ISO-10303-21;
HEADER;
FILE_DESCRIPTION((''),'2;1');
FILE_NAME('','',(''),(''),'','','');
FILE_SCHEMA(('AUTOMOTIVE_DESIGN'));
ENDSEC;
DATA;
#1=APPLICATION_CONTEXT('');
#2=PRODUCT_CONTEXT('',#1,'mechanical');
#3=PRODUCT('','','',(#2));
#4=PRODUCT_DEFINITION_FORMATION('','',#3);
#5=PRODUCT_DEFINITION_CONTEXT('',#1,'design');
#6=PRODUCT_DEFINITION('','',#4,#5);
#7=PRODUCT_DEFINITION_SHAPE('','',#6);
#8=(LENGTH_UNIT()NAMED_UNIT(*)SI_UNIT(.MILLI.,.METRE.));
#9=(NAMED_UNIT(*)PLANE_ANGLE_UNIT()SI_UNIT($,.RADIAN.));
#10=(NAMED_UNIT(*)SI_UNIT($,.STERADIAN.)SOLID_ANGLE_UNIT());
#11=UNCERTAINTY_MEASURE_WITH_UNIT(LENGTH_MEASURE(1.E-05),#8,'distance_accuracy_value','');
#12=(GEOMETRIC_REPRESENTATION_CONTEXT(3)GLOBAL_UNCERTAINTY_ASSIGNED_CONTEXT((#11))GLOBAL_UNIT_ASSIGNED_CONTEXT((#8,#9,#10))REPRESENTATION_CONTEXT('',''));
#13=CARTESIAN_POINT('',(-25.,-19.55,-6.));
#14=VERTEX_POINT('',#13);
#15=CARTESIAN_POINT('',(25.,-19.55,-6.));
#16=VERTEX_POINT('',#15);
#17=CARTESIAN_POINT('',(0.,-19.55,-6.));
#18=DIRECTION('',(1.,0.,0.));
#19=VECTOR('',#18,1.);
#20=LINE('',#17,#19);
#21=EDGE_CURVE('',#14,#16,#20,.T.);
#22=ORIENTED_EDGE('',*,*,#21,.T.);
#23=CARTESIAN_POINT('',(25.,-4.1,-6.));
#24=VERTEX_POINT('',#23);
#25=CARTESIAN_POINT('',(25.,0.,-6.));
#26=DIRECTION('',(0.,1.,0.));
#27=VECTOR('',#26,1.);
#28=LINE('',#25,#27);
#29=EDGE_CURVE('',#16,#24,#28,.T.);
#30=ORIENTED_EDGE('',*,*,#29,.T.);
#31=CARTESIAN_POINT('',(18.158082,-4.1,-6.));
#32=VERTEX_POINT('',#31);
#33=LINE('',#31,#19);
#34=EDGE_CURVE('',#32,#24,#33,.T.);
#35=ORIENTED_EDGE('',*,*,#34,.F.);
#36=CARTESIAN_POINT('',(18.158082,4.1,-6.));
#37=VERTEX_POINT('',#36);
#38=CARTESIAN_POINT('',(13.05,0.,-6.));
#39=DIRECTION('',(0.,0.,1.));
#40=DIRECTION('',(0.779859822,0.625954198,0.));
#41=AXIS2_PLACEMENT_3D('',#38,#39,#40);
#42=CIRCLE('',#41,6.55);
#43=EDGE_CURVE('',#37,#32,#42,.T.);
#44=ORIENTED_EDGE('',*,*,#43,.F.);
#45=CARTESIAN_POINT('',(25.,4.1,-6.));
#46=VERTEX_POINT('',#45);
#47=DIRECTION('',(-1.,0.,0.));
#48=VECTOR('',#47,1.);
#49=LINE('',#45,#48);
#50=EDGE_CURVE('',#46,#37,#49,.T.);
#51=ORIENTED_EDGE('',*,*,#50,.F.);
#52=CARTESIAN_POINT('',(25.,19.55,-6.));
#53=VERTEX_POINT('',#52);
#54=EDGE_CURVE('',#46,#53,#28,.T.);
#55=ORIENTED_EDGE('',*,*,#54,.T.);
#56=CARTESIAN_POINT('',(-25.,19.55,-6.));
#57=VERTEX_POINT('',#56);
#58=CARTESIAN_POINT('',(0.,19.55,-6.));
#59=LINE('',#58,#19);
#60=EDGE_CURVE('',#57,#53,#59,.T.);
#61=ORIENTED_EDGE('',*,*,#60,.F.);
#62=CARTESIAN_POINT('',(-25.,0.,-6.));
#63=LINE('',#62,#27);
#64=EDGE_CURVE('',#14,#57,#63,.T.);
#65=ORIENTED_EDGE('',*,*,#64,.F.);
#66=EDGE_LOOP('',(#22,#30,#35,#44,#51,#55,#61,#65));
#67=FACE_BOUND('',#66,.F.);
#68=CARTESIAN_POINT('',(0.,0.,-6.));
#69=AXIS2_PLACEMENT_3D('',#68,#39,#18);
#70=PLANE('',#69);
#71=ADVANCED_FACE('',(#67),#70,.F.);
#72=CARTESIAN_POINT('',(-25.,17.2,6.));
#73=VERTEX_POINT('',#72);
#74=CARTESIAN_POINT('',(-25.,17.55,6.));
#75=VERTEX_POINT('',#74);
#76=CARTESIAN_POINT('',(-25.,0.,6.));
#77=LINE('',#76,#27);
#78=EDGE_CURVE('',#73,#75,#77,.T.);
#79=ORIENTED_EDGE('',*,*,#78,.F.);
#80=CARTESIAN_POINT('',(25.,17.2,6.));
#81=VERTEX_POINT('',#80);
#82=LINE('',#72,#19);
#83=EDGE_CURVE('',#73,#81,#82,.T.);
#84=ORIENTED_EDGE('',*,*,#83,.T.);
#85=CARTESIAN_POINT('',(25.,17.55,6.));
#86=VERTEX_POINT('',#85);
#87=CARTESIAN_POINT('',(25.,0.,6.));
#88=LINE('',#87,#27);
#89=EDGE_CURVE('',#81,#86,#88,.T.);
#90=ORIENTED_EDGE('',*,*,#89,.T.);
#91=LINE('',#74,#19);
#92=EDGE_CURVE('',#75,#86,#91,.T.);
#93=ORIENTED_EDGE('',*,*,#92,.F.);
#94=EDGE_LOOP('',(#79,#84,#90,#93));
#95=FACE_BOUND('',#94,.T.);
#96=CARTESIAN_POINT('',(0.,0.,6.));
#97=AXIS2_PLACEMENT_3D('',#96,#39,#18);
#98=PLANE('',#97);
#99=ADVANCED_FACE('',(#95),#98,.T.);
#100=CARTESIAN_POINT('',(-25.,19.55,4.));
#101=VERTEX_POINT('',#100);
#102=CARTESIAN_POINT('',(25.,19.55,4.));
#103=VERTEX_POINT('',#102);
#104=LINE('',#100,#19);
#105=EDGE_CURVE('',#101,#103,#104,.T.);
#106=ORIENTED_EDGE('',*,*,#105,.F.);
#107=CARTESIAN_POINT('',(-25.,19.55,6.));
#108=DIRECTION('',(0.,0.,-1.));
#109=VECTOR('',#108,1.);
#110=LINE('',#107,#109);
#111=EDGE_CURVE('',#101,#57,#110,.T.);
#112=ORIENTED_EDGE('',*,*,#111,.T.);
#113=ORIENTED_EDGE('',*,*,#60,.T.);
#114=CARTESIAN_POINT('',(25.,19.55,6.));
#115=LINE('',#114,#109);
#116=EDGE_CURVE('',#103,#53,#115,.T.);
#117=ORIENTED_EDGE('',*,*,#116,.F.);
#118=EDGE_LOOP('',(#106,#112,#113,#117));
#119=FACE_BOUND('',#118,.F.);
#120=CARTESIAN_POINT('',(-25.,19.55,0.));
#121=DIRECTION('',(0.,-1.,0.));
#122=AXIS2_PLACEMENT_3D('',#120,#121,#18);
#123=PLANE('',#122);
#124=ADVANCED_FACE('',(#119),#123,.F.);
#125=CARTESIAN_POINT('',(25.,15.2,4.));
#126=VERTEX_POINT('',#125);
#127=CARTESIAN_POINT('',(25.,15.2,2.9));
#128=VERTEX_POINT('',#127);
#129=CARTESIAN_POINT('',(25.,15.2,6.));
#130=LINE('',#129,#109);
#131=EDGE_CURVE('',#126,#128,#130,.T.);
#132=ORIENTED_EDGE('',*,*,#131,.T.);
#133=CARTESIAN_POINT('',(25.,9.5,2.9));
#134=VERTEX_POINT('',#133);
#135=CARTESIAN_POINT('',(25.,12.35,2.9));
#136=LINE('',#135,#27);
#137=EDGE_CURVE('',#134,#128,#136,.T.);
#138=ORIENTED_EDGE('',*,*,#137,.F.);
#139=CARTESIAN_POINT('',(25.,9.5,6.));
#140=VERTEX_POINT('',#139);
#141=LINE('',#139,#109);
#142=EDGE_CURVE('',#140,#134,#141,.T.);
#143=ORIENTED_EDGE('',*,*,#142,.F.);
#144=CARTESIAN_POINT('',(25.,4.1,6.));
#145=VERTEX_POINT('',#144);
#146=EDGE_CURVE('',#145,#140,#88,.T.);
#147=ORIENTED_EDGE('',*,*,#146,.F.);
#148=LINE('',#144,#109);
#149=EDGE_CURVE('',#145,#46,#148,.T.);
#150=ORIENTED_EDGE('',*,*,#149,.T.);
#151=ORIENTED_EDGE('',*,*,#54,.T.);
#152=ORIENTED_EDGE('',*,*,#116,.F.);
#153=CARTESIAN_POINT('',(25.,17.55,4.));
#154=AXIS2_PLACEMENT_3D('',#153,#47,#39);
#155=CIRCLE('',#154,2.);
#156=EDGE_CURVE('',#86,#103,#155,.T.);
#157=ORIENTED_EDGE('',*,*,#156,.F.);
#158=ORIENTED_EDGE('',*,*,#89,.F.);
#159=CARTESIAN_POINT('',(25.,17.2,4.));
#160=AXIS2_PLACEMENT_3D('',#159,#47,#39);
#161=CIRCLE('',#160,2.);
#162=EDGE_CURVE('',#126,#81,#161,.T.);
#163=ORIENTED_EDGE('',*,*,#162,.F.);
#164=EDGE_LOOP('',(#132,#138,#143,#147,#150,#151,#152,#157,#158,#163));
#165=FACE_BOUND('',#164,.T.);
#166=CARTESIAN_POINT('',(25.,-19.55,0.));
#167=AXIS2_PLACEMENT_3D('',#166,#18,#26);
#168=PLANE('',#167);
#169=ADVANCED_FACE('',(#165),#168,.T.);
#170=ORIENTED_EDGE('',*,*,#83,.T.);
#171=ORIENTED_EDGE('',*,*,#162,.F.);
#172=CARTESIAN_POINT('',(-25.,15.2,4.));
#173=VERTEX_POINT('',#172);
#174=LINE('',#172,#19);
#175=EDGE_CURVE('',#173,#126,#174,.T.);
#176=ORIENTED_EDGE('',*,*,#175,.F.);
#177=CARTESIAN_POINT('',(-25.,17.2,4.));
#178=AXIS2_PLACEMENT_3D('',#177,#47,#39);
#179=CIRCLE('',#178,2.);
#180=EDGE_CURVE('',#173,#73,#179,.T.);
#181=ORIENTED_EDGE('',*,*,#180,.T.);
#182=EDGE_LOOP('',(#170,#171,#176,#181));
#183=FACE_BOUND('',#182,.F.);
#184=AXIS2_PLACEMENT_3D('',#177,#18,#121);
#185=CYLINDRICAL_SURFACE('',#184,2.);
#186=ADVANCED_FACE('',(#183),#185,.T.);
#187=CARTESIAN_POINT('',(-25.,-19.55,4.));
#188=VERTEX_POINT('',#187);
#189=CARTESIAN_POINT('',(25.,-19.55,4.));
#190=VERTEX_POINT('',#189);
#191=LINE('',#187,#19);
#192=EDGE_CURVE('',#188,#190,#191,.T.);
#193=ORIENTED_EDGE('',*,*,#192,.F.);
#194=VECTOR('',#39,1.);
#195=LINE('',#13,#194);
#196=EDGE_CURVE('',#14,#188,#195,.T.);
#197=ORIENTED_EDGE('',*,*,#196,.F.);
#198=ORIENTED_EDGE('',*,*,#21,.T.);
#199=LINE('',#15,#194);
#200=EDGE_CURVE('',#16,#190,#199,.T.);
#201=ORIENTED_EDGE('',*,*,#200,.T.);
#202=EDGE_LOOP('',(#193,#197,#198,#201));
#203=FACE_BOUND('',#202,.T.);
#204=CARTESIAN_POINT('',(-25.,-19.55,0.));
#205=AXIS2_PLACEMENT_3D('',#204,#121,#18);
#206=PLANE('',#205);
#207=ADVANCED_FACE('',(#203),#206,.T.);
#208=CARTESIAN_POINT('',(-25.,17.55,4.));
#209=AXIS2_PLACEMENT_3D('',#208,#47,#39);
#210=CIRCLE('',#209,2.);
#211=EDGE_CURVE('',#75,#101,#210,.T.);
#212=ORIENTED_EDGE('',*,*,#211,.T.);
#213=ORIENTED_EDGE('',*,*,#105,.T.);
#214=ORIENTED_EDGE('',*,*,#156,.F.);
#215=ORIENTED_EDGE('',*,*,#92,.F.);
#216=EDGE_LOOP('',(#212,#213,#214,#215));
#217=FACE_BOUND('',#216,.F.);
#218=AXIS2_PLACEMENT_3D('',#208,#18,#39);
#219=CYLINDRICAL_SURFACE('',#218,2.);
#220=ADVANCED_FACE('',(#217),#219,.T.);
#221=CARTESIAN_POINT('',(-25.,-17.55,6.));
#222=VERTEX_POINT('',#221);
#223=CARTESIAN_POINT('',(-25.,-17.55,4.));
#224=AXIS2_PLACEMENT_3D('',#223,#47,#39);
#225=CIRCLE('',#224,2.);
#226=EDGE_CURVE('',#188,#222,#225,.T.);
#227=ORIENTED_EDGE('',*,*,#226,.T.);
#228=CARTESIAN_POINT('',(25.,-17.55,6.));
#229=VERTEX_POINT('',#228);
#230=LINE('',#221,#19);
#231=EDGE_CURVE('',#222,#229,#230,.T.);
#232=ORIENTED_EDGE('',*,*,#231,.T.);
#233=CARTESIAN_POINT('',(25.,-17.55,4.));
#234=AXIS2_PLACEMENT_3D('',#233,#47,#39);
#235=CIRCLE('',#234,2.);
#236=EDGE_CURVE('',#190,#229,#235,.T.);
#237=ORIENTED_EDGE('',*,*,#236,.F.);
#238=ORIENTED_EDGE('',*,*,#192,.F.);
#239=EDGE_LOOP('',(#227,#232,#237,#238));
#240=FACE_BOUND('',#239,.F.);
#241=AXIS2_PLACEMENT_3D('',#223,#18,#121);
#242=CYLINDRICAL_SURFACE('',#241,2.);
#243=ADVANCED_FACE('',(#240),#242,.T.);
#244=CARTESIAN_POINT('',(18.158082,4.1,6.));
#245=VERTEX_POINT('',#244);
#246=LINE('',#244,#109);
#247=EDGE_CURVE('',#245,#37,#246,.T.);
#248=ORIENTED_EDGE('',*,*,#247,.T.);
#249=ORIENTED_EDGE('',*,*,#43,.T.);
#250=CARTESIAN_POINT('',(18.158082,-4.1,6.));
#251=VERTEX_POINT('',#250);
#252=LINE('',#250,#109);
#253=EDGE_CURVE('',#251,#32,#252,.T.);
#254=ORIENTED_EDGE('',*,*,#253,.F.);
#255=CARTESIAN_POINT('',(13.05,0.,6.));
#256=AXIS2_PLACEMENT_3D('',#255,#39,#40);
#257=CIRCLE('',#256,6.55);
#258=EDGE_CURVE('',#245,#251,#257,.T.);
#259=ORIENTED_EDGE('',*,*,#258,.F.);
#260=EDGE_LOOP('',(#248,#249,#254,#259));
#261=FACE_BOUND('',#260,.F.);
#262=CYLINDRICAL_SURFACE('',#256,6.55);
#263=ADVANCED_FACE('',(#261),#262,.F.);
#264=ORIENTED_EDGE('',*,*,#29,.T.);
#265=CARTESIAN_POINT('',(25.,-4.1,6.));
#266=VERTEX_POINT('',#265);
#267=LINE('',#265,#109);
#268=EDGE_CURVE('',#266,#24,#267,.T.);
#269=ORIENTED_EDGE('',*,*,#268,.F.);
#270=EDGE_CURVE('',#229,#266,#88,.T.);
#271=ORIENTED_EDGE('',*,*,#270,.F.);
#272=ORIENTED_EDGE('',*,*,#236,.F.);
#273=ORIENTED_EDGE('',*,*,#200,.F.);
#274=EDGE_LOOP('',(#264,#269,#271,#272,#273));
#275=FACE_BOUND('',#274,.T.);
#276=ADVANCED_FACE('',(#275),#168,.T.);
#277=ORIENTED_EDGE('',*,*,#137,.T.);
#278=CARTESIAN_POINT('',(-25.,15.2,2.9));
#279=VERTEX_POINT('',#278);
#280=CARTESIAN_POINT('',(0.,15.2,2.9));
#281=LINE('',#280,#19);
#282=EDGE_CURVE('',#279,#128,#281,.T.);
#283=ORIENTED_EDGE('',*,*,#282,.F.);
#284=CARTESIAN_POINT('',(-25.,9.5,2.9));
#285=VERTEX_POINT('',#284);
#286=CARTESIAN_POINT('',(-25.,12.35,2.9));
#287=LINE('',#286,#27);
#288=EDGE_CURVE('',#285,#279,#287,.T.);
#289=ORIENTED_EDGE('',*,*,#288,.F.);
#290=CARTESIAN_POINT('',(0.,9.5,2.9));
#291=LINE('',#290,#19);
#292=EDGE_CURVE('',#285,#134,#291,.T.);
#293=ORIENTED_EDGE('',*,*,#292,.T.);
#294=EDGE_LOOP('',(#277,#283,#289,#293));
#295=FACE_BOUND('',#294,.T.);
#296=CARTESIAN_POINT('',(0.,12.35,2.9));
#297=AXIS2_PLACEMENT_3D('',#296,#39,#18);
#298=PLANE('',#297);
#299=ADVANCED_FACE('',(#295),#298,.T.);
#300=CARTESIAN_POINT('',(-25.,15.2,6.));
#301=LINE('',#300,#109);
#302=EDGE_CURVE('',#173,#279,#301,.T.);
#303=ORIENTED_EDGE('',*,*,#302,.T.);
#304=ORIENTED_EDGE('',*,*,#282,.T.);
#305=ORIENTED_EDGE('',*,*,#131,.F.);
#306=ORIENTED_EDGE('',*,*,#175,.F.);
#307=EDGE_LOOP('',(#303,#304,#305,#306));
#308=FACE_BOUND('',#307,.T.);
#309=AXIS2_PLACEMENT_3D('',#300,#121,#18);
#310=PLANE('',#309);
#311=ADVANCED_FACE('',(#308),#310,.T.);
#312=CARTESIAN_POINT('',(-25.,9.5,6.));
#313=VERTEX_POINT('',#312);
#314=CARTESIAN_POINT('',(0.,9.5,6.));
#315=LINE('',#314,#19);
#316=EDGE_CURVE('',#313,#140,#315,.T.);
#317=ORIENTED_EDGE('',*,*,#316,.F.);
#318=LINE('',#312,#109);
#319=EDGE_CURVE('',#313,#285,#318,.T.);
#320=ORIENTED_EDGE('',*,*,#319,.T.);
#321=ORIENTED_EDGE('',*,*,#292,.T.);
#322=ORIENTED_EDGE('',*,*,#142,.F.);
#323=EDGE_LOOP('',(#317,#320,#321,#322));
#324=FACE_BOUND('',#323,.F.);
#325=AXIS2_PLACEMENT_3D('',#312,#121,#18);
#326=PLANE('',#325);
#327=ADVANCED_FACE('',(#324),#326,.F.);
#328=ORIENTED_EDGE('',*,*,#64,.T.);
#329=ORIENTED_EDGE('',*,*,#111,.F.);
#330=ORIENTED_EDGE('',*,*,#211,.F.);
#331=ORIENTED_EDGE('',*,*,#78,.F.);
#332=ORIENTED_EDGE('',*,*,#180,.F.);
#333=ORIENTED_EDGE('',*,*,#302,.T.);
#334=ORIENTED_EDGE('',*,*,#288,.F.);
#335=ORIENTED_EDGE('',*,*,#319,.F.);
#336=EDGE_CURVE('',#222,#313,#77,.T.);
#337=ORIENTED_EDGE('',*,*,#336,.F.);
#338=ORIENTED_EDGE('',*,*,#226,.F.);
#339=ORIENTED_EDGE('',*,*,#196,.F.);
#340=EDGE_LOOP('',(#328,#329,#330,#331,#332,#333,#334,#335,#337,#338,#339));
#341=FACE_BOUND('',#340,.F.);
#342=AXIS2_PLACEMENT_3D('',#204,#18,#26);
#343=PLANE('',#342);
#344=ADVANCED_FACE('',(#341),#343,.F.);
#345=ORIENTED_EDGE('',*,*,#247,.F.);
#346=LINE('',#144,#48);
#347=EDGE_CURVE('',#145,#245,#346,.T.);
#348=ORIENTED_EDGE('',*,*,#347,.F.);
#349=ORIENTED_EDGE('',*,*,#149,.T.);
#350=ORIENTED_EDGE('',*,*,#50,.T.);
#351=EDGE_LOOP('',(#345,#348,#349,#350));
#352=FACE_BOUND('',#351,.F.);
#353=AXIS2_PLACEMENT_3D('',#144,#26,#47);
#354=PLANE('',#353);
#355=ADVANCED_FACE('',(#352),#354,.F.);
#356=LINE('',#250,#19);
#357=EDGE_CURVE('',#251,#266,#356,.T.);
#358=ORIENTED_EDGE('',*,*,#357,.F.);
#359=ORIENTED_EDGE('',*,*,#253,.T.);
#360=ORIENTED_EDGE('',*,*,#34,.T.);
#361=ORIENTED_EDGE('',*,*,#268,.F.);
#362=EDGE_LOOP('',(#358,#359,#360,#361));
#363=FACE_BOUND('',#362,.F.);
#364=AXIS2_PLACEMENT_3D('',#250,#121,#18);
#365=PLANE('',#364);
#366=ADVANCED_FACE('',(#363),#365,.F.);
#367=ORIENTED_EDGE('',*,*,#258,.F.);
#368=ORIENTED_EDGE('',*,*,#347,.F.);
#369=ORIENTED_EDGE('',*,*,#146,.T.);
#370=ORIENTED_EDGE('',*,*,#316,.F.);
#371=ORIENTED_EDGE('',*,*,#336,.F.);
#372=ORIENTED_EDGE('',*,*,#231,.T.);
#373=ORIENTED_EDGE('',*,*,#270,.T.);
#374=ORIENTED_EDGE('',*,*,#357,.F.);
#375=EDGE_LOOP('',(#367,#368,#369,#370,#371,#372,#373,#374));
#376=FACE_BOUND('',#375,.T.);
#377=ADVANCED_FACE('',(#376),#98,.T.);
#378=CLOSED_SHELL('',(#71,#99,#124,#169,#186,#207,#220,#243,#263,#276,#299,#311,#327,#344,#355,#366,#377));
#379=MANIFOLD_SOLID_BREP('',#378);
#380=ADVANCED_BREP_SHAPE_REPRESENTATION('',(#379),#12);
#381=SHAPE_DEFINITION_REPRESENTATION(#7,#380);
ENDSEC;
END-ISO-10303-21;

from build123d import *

# Parameters (mm, degrees)
F0_W     = 50
F0_H     = 39.1
F1_DEPTH = 6
F2_W     = 50
F2_H     = 5.7
F3_DEPTH = 3.1
F4_DEPTH = 12
F5_R     = 2


with BuildPart() as f1:
    # F0 (on Top) → F1 (new body, symmetric)
    with BuildSketch(Plane.XY):
        Rectangle(F0_W, F0_H)
    extrude(amount=F1_DEPTH, both=True)

    # F2 (on face) → F3 (cut)
    with BuildSketch(Plane.XY.offset(6)):
        with Locations((0, 12.35)):
            Rectangle(F2_W, F2_H)
    extrude(amount=-F3_DEPTH, mode=Mode.SUBTRACT)

    # F2 (on face) → F4 (cut, through all)
    with BuildSketch(Plane.XY.offset(6)):
        with BuildLine():
            Line((25, -4.1), (25, 0))
            Line((25, 0), (25, 4.1))
            Line((25, 4.1), (18.1580818318, 4.1))
            ThreePointArc((18.1580818318, 4.1), (6.5, 0), (18.1580818318, -4.1))
            Line((18.1580818318, -4.1), (25, -4.1))
        make_face()
    extrude(amount=-F4_DEPTH, mode=Mode.SUBTRACT)

    # F5
    f5_edges = [f1.edges().sort_by_distance(p)[0] for p in [
        (0, -19.55, 6),
        (0, 15.2, 6),
        (0, 19.55, 6),
    ]]
    fillet(f5_edges, radius=F5_R)


solid = f1.part
